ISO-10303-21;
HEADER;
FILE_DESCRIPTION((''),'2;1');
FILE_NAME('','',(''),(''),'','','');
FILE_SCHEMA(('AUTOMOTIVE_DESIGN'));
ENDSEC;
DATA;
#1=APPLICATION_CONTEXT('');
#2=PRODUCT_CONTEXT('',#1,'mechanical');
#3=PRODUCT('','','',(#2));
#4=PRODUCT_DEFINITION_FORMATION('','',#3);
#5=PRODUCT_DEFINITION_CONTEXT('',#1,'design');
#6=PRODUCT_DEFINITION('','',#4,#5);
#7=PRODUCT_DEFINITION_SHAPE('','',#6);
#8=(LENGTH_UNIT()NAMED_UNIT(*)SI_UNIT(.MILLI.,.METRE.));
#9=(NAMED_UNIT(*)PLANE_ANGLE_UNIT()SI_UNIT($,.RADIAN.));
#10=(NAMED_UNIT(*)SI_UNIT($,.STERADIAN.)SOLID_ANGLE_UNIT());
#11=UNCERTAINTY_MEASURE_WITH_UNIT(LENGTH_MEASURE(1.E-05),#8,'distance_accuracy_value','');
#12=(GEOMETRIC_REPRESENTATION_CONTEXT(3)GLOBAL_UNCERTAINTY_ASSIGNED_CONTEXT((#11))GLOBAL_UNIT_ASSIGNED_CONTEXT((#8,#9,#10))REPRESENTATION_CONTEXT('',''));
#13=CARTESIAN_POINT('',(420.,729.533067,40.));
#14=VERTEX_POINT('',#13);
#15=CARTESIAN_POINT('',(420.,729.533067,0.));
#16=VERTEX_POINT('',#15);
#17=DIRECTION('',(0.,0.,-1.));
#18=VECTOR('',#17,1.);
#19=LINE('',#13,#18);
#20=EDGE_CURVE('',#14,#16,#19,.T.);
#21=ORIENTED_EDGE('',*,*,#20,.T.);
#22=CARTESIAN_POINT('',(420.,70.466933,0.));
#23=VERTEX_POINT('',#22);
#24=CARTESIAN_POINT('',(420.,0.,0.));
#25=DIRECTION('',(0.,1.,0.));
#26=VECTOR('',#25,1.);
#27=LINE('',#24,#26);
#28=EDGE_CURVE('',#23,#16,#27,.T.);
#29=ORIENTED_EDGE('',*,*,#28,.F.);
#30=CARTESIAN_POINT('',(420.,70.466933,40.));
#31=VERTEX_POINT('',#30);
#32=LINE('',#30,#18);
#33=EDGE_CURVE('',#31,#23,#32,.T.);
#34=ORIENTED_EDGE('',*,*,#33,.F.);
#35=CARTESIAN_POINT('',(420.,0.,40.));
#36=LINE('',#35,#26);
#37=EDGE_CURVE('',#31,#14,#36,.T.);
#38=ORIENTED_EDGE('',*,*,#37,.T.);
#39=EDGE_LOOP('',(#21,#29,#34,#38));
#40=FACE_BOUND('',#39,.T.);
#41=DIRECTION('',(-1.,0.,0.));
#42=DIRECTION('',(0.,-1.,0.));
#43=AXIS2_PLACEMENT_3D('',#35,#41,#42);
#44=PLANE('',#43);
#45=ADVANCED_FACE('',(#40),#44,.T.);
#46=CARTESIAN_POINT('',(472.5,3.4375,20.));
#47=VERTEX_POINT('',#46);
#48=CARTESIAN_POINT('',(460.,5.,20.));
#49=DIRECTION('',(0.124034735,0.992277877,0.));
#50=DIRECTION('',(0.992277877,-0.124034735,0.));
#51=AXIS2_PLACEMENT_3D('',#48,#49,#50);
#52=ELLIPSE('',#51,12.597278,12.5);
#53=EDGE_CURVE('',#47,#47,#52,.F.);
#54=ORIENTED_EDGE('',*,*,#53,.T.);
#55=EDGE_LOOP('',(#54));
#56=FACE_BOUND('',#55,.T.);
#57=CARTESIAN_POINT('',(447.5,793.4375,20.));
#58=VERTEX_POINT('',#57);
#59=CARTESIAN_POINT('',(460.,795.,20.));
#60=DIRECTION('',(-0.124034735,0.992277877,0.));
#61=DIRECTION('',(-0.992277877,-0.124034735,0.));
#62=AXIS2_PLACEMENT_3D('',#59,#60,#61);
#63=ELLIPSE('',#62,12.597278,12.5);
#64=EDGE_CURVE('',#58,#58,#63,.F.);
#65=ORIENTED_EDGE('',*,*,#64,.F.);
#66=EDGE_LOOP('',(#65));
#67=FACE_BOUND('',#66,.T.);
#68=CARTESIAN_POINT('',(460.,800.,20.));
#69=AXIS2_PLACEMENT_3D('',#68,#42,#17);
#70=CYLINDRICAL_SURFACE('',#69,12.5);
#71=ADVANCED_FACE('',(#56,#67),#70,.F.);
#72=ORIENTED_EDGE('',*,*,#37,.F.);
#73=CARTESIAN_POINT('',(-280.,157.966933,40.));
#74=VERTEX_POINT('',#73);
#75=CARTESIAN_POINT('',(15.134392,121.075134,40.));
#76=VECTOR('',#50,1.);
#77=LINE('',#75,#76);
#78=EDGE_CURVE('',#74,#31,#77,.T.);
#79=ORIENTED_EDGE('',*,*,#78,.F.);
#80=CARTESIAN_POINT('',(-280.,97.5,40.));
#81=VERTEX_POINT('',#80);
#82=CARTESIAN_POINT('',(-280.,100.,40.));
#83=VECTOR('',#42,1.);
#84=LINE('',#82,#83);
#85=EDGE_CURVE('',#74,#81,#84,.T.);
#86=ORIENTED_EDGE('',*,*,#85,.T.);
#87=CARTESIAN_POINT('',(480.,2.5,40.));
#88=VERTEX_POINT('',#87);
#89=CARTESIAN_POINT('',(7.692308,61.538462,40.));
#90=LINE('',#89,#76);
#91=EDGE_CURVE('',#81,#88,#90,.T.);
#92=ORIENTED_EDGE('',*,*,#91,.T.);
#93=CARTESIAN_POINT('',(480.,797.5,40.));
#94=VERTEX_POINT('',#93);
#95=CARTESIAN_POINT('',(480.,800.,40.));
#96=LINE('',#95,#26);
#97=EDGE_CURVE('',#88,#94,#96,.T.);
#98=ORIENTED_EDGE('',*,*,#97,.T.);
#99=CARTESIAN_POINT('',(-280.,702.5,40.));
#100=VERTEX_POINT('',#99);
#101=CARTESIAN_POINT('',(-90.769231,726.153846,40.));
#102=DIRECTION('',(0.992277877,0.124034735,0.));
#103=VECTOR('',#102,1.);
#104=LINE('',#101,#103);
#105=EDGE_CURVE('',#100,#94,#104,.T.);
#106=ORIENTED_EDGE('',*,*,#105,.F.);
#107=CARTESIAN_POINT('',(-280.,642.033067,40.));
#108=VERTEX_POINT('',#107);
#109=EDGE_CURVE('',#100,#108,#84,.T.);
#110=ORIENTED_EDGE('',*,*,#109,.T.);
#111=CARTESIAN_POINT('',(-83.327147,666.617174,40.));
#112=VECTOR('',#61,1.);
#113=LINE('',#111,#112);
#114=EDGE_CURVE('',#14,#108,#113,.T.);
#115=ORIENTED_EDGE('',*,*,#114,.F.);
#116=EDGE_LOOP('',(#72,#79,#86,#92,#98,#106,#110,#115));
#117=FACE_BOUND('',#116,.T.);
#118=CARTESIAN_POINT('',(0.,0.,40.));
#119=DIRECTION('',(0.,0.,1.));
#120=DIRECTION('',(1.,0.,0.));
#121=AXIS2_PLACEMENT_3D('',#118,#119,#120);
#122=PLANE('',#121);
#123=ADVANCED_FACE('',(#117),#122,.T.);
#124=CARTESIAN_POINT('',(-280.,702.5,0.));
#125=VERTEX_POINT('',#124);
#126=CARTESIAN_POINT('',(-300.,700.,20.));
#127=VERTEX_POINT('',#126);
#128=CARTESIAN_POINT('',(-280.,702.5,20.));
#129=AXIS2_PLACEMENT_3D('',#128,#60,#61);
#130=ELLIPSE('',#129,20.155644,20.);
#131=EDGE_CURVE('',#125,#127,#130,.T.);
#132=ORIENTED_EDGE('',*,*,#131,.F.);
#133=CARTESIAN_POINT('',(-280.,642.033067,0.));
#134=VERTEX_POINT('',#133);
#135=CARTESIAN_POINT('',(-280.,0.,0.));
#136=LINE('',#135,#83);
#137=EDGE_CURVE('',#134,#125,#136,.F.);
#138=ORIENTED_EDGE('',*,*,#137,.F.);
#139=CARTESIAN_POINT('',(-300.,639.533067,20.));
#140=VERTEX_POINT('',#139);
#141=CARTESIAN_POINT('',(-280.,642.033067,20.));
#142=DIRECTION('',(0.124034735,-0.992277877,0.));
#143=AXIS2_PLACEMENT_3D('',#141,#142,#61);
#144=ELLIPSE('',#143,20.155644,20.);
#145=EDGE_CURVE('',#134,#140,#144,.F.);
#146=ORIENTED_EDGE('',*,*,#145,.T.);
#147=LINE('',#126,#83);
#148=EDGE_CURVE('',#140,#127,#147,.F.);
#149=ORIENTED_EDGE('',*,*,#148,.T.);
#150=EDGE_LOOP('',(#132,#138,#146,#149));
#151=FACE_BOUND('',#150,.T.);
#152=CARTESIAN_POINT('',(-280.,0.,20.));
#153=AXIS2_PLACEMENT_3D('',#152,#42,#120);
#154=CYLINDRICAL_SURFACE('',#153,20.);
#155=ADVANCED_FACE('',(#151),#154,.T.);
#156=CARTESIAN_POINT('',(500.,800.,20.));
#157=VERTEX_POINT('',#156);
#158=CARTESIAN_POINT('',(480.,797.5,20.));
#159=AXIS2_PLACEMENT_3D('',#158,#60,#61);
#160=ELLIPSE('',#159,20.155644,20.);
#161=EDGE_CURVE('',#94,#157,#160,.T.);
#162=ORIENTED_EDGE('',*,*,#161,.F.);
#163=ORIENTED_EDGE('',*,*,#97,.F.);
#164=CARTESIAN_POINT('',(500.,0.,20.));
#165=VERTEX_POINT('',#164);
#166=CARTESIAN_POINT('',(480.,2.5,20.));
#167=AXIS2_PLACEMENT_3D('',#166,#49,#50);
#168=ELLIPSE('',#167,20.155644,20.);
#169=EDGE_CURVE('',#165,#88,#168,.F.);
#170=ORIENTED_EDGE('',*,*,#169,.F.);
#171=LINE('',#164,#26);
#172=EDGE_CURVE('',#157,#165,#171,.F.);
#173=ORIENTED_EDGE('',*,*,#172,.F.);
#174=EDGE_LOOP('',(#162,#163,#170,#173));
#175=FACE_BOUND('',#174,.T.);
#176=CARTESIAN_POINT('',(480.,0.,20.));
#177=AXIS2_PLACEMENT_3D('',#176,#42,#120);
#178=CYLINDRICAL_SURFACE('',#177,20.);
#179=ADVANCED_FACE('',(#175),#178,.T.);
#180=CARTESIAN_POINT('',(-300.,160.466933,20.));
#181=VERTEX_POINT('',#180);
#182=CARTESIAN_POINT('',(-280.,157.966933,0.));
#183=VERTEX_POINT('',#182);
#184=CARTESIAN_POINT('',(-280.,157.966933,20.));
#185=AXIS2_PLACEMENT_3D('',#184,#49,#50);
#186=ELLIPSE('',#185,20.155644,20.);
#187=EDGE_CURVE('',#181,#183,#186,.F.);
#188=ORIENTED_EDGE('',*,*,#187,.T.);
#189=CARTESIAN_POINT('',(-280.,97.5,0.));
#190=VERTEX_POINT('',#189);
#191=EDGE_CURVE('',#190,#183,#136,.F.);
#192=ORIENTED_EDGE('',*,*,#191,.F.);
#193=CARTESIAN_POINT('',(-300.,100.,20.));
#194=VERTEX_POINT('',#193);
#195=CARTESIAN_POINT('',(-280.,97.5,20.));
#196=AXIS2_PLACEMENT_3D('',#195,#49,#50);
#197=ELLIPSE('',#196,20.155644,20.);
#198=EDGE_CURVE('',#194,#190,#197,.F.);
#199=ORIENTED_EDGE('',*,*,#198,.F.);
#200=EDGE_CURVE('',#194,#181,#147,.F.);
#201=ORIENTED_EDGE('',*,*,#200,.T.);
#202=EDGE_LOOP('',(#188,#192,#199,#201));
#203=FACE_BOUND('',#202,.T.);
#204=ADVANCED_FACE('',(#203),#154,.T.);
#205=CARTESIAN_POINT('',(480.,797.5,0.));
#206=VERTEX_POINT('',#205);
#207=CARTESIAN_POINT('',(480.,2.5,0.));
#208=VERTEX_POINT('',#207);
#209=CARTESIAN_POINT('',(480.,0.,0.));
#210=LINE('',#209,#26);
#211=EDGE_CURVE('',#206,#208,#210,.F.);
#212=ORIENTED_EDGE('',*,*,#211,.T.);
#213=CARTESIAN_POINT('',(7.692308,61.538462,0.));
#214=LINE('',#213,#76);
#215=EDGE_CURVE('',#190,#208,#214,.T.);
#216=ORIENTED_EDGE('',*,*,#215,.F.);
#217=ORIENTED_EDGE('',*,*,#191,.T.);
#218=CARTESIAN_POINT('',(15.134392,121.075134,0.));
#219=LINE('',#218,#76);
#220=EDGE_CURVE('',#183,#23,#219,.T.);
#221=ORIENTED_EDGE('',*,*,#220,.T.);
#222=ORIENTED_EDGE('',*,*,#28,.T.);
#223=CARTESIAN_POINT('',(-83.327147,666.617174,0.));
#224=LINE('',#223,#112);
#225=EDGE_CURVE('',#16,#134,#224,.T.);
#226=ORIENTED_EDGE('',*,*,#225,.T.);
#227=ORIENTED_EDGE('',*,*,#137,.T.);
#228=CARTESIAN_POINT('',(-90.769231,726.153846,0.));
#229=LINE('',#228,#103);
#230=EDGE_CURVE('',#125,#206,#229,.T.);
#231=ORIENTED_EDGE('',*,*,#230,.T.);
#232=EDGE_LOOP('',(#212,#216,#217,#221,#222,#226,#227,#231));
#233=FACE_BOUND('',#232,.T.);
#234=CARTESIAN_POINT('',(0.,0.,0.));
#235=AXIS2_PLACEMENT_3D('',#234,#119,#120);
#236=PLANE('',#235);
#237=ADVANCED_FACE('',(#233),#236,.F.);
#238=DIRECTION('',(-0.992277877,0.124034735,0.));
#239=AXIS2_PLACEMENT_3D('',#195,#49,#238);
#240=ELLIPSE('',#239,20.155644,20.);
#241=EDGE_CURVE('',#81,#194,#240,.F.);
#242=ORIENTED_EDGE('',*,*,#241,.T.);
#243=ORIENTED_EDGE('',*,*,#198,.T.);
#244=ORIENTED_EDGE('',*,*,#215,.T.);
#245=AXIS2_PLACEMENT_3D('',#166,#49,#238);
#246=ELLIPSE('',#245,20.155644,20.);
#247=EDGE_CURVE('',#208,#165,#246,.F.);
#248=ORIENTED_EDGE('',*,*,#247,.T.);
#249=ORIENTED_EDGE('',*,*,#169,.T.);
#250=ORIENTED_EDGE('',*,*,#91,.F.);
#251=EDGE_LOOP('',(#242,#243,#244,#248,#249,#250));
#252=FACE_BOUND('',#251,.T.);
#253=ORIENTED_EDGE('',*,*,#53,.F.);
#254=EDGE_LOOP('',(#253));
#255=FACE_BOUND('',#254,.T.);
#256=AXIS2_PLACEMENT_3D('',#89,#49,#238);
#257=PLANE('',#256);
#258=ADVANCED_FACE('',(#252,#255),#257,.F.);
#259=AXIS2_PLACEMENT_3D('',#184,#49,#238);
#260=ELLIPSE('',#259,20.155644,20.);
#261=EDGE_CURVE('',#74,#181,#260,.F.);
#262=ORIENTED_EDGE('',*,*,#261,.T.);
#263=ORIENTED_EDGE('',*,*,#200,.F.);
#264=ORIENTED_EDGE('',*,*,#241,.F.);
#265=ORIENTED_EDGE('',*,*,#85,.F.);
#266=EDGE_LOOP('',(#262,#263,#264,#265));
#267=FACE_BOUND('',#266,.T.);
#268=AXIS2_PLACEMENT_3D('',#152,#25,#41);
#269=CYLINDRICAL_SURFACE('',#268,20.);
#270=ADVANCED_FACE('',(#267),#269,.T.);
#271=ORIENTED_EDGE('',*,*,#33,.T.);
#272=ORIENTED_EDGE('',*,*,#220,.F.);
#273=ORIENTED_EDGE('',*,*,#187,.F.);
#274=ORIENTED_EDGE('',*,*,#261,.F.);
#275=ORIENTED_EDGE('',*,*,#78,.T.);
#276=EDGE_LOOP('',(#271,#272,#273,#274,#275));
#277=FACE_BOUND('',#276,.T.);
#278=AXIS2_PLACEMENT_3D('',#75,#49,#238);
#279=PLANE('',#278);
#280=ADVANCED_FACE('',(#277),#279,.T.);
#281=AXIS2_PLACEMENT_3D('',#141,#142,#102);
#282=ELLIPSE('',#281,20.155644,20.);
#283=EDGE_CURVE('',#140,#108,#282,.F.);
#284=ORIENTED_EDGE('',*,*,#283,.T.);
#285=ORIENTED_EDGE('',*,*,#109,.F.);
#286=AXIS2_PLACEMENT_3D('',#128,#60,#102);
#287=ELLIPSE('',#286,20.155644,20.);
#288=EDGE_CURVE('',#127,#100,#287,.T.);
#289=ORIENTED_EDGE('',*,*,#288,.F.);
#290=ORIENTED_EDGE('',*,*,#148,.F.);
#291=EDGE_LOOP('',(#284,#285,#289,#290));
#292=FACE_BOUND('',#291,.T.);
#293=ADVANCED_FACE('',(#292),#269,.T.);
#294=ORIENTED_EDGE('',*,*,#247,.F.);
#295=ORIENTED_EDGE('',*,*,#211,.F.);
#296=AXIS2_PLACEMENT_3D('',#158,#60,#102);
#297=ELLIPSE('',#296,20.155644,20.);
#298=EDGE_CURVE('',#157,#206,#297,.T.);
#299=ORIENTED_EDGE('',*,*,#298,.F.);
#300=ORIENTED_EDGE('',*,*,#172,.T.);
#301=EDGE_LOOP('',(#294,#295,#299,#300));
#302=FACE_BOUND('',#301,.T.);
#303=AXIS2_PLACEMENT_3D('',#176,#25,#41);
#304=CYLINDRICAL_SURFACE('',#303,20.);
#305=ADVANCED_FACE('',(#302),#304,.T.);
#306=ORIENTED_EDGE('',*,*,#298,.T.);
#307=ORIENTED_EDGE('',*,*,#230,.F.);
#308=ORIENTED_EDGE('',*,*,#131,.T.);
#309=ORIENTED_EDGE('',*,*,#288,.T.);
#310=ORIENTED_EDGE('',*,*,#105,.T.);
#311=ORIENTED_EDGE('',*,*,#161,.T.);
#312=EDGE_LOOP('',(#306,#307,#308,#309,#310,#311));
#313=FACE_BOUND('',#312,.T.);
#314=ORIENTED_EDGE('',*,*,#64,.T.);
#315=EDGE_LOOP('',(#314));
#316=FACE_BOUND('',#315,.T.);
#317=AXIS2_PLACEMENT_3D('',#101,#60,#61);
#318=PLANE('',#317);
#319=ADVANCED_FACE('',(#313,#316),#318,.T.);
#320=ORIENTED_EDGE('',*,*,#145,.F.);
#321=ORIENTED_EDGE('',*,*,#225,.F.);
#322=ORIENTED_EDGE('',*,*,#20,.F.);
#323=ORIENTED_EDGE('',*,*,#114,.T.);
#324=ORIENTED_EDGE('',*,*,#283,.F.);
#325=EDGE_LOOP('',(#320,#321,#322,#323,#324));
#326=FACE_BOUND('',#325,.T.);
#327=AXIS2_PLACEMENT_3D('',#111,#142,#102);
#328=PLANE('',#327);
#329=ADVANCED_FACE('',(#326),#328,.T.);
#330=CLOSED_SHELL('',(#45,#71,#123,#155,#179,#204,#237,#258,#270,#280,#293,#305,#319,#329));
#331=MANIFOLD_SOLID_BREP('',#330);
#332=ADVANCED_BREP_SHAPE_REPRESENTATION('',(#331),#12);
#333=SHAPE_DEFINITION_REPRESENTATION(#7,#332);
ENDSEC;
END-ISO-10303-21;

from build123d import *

# Parameters (mm, degrees)
BOSS_EXTRU_1_DEPTH      = 40
ESQUISSE2_R             = 12.5
ENL_V_MAT_EXTRU_1_DEPTH = 945.245730729
CONG_1_R                = 20
ENL_V_MAT_EXTRU_4_DEPTH = 945.245730729


with BuildPart() as part:
    # Esquisse1 → Boss.-Extru.1 (new body)
    with BuildSketch(Plane.XY):
        Polygon((500, 0), (500, 800), (-300, 700), (-300, 100), align=None)
    extrude(amount=BOSS_EXTRU_1_DEPTH)

    # Esquisse2 → Enlèv. mat.-Extru.1 (cut, through all)
    with BuildSketch(Plane(origin=(0, 0, 0), x_dir=(1, 0, 0), z_dir=(0, 1, 0))):
        with Locations((460, -20)):
            Circle(ESQUISSE2_R)
    extrude(amount=ENL_V_MAT_EXTRU_1_DEPTH, mode=Mode.SUBTRACT)

    # Congé1
    cong_1_edges = [part.edges().sort_by_distance(p)[0] for p in [
        (-300, 400, 0),
        (-300, 400, 40),
        (500, 400, 0),
        (500, 400, 40),
    ]]
    fillet(cong_1_edges, radius=CONG_1_R - 0.0001)  # a hair under: the kernel refuses the full size

    # Esquisse3 → Enlèv. mat.-Extru.4 (cut, through all)
    with BuildSketch(Plane.XY):
        Polygon((-300, 639.533066888), (-300, 160.466933112), (-292.557915925, 159.536672603), (-272.557915925, 157.036672603), (420, 70.466933112), (420, 729.533066888), (-272.557915925, 642.963327397), (-292.557915925, 640.463327397), align=None)
    extrude(amount=ENL_V_MAT_EXTRU_4_DEPTH, mode=Mode.SUBTRACT)


solid = part.part
